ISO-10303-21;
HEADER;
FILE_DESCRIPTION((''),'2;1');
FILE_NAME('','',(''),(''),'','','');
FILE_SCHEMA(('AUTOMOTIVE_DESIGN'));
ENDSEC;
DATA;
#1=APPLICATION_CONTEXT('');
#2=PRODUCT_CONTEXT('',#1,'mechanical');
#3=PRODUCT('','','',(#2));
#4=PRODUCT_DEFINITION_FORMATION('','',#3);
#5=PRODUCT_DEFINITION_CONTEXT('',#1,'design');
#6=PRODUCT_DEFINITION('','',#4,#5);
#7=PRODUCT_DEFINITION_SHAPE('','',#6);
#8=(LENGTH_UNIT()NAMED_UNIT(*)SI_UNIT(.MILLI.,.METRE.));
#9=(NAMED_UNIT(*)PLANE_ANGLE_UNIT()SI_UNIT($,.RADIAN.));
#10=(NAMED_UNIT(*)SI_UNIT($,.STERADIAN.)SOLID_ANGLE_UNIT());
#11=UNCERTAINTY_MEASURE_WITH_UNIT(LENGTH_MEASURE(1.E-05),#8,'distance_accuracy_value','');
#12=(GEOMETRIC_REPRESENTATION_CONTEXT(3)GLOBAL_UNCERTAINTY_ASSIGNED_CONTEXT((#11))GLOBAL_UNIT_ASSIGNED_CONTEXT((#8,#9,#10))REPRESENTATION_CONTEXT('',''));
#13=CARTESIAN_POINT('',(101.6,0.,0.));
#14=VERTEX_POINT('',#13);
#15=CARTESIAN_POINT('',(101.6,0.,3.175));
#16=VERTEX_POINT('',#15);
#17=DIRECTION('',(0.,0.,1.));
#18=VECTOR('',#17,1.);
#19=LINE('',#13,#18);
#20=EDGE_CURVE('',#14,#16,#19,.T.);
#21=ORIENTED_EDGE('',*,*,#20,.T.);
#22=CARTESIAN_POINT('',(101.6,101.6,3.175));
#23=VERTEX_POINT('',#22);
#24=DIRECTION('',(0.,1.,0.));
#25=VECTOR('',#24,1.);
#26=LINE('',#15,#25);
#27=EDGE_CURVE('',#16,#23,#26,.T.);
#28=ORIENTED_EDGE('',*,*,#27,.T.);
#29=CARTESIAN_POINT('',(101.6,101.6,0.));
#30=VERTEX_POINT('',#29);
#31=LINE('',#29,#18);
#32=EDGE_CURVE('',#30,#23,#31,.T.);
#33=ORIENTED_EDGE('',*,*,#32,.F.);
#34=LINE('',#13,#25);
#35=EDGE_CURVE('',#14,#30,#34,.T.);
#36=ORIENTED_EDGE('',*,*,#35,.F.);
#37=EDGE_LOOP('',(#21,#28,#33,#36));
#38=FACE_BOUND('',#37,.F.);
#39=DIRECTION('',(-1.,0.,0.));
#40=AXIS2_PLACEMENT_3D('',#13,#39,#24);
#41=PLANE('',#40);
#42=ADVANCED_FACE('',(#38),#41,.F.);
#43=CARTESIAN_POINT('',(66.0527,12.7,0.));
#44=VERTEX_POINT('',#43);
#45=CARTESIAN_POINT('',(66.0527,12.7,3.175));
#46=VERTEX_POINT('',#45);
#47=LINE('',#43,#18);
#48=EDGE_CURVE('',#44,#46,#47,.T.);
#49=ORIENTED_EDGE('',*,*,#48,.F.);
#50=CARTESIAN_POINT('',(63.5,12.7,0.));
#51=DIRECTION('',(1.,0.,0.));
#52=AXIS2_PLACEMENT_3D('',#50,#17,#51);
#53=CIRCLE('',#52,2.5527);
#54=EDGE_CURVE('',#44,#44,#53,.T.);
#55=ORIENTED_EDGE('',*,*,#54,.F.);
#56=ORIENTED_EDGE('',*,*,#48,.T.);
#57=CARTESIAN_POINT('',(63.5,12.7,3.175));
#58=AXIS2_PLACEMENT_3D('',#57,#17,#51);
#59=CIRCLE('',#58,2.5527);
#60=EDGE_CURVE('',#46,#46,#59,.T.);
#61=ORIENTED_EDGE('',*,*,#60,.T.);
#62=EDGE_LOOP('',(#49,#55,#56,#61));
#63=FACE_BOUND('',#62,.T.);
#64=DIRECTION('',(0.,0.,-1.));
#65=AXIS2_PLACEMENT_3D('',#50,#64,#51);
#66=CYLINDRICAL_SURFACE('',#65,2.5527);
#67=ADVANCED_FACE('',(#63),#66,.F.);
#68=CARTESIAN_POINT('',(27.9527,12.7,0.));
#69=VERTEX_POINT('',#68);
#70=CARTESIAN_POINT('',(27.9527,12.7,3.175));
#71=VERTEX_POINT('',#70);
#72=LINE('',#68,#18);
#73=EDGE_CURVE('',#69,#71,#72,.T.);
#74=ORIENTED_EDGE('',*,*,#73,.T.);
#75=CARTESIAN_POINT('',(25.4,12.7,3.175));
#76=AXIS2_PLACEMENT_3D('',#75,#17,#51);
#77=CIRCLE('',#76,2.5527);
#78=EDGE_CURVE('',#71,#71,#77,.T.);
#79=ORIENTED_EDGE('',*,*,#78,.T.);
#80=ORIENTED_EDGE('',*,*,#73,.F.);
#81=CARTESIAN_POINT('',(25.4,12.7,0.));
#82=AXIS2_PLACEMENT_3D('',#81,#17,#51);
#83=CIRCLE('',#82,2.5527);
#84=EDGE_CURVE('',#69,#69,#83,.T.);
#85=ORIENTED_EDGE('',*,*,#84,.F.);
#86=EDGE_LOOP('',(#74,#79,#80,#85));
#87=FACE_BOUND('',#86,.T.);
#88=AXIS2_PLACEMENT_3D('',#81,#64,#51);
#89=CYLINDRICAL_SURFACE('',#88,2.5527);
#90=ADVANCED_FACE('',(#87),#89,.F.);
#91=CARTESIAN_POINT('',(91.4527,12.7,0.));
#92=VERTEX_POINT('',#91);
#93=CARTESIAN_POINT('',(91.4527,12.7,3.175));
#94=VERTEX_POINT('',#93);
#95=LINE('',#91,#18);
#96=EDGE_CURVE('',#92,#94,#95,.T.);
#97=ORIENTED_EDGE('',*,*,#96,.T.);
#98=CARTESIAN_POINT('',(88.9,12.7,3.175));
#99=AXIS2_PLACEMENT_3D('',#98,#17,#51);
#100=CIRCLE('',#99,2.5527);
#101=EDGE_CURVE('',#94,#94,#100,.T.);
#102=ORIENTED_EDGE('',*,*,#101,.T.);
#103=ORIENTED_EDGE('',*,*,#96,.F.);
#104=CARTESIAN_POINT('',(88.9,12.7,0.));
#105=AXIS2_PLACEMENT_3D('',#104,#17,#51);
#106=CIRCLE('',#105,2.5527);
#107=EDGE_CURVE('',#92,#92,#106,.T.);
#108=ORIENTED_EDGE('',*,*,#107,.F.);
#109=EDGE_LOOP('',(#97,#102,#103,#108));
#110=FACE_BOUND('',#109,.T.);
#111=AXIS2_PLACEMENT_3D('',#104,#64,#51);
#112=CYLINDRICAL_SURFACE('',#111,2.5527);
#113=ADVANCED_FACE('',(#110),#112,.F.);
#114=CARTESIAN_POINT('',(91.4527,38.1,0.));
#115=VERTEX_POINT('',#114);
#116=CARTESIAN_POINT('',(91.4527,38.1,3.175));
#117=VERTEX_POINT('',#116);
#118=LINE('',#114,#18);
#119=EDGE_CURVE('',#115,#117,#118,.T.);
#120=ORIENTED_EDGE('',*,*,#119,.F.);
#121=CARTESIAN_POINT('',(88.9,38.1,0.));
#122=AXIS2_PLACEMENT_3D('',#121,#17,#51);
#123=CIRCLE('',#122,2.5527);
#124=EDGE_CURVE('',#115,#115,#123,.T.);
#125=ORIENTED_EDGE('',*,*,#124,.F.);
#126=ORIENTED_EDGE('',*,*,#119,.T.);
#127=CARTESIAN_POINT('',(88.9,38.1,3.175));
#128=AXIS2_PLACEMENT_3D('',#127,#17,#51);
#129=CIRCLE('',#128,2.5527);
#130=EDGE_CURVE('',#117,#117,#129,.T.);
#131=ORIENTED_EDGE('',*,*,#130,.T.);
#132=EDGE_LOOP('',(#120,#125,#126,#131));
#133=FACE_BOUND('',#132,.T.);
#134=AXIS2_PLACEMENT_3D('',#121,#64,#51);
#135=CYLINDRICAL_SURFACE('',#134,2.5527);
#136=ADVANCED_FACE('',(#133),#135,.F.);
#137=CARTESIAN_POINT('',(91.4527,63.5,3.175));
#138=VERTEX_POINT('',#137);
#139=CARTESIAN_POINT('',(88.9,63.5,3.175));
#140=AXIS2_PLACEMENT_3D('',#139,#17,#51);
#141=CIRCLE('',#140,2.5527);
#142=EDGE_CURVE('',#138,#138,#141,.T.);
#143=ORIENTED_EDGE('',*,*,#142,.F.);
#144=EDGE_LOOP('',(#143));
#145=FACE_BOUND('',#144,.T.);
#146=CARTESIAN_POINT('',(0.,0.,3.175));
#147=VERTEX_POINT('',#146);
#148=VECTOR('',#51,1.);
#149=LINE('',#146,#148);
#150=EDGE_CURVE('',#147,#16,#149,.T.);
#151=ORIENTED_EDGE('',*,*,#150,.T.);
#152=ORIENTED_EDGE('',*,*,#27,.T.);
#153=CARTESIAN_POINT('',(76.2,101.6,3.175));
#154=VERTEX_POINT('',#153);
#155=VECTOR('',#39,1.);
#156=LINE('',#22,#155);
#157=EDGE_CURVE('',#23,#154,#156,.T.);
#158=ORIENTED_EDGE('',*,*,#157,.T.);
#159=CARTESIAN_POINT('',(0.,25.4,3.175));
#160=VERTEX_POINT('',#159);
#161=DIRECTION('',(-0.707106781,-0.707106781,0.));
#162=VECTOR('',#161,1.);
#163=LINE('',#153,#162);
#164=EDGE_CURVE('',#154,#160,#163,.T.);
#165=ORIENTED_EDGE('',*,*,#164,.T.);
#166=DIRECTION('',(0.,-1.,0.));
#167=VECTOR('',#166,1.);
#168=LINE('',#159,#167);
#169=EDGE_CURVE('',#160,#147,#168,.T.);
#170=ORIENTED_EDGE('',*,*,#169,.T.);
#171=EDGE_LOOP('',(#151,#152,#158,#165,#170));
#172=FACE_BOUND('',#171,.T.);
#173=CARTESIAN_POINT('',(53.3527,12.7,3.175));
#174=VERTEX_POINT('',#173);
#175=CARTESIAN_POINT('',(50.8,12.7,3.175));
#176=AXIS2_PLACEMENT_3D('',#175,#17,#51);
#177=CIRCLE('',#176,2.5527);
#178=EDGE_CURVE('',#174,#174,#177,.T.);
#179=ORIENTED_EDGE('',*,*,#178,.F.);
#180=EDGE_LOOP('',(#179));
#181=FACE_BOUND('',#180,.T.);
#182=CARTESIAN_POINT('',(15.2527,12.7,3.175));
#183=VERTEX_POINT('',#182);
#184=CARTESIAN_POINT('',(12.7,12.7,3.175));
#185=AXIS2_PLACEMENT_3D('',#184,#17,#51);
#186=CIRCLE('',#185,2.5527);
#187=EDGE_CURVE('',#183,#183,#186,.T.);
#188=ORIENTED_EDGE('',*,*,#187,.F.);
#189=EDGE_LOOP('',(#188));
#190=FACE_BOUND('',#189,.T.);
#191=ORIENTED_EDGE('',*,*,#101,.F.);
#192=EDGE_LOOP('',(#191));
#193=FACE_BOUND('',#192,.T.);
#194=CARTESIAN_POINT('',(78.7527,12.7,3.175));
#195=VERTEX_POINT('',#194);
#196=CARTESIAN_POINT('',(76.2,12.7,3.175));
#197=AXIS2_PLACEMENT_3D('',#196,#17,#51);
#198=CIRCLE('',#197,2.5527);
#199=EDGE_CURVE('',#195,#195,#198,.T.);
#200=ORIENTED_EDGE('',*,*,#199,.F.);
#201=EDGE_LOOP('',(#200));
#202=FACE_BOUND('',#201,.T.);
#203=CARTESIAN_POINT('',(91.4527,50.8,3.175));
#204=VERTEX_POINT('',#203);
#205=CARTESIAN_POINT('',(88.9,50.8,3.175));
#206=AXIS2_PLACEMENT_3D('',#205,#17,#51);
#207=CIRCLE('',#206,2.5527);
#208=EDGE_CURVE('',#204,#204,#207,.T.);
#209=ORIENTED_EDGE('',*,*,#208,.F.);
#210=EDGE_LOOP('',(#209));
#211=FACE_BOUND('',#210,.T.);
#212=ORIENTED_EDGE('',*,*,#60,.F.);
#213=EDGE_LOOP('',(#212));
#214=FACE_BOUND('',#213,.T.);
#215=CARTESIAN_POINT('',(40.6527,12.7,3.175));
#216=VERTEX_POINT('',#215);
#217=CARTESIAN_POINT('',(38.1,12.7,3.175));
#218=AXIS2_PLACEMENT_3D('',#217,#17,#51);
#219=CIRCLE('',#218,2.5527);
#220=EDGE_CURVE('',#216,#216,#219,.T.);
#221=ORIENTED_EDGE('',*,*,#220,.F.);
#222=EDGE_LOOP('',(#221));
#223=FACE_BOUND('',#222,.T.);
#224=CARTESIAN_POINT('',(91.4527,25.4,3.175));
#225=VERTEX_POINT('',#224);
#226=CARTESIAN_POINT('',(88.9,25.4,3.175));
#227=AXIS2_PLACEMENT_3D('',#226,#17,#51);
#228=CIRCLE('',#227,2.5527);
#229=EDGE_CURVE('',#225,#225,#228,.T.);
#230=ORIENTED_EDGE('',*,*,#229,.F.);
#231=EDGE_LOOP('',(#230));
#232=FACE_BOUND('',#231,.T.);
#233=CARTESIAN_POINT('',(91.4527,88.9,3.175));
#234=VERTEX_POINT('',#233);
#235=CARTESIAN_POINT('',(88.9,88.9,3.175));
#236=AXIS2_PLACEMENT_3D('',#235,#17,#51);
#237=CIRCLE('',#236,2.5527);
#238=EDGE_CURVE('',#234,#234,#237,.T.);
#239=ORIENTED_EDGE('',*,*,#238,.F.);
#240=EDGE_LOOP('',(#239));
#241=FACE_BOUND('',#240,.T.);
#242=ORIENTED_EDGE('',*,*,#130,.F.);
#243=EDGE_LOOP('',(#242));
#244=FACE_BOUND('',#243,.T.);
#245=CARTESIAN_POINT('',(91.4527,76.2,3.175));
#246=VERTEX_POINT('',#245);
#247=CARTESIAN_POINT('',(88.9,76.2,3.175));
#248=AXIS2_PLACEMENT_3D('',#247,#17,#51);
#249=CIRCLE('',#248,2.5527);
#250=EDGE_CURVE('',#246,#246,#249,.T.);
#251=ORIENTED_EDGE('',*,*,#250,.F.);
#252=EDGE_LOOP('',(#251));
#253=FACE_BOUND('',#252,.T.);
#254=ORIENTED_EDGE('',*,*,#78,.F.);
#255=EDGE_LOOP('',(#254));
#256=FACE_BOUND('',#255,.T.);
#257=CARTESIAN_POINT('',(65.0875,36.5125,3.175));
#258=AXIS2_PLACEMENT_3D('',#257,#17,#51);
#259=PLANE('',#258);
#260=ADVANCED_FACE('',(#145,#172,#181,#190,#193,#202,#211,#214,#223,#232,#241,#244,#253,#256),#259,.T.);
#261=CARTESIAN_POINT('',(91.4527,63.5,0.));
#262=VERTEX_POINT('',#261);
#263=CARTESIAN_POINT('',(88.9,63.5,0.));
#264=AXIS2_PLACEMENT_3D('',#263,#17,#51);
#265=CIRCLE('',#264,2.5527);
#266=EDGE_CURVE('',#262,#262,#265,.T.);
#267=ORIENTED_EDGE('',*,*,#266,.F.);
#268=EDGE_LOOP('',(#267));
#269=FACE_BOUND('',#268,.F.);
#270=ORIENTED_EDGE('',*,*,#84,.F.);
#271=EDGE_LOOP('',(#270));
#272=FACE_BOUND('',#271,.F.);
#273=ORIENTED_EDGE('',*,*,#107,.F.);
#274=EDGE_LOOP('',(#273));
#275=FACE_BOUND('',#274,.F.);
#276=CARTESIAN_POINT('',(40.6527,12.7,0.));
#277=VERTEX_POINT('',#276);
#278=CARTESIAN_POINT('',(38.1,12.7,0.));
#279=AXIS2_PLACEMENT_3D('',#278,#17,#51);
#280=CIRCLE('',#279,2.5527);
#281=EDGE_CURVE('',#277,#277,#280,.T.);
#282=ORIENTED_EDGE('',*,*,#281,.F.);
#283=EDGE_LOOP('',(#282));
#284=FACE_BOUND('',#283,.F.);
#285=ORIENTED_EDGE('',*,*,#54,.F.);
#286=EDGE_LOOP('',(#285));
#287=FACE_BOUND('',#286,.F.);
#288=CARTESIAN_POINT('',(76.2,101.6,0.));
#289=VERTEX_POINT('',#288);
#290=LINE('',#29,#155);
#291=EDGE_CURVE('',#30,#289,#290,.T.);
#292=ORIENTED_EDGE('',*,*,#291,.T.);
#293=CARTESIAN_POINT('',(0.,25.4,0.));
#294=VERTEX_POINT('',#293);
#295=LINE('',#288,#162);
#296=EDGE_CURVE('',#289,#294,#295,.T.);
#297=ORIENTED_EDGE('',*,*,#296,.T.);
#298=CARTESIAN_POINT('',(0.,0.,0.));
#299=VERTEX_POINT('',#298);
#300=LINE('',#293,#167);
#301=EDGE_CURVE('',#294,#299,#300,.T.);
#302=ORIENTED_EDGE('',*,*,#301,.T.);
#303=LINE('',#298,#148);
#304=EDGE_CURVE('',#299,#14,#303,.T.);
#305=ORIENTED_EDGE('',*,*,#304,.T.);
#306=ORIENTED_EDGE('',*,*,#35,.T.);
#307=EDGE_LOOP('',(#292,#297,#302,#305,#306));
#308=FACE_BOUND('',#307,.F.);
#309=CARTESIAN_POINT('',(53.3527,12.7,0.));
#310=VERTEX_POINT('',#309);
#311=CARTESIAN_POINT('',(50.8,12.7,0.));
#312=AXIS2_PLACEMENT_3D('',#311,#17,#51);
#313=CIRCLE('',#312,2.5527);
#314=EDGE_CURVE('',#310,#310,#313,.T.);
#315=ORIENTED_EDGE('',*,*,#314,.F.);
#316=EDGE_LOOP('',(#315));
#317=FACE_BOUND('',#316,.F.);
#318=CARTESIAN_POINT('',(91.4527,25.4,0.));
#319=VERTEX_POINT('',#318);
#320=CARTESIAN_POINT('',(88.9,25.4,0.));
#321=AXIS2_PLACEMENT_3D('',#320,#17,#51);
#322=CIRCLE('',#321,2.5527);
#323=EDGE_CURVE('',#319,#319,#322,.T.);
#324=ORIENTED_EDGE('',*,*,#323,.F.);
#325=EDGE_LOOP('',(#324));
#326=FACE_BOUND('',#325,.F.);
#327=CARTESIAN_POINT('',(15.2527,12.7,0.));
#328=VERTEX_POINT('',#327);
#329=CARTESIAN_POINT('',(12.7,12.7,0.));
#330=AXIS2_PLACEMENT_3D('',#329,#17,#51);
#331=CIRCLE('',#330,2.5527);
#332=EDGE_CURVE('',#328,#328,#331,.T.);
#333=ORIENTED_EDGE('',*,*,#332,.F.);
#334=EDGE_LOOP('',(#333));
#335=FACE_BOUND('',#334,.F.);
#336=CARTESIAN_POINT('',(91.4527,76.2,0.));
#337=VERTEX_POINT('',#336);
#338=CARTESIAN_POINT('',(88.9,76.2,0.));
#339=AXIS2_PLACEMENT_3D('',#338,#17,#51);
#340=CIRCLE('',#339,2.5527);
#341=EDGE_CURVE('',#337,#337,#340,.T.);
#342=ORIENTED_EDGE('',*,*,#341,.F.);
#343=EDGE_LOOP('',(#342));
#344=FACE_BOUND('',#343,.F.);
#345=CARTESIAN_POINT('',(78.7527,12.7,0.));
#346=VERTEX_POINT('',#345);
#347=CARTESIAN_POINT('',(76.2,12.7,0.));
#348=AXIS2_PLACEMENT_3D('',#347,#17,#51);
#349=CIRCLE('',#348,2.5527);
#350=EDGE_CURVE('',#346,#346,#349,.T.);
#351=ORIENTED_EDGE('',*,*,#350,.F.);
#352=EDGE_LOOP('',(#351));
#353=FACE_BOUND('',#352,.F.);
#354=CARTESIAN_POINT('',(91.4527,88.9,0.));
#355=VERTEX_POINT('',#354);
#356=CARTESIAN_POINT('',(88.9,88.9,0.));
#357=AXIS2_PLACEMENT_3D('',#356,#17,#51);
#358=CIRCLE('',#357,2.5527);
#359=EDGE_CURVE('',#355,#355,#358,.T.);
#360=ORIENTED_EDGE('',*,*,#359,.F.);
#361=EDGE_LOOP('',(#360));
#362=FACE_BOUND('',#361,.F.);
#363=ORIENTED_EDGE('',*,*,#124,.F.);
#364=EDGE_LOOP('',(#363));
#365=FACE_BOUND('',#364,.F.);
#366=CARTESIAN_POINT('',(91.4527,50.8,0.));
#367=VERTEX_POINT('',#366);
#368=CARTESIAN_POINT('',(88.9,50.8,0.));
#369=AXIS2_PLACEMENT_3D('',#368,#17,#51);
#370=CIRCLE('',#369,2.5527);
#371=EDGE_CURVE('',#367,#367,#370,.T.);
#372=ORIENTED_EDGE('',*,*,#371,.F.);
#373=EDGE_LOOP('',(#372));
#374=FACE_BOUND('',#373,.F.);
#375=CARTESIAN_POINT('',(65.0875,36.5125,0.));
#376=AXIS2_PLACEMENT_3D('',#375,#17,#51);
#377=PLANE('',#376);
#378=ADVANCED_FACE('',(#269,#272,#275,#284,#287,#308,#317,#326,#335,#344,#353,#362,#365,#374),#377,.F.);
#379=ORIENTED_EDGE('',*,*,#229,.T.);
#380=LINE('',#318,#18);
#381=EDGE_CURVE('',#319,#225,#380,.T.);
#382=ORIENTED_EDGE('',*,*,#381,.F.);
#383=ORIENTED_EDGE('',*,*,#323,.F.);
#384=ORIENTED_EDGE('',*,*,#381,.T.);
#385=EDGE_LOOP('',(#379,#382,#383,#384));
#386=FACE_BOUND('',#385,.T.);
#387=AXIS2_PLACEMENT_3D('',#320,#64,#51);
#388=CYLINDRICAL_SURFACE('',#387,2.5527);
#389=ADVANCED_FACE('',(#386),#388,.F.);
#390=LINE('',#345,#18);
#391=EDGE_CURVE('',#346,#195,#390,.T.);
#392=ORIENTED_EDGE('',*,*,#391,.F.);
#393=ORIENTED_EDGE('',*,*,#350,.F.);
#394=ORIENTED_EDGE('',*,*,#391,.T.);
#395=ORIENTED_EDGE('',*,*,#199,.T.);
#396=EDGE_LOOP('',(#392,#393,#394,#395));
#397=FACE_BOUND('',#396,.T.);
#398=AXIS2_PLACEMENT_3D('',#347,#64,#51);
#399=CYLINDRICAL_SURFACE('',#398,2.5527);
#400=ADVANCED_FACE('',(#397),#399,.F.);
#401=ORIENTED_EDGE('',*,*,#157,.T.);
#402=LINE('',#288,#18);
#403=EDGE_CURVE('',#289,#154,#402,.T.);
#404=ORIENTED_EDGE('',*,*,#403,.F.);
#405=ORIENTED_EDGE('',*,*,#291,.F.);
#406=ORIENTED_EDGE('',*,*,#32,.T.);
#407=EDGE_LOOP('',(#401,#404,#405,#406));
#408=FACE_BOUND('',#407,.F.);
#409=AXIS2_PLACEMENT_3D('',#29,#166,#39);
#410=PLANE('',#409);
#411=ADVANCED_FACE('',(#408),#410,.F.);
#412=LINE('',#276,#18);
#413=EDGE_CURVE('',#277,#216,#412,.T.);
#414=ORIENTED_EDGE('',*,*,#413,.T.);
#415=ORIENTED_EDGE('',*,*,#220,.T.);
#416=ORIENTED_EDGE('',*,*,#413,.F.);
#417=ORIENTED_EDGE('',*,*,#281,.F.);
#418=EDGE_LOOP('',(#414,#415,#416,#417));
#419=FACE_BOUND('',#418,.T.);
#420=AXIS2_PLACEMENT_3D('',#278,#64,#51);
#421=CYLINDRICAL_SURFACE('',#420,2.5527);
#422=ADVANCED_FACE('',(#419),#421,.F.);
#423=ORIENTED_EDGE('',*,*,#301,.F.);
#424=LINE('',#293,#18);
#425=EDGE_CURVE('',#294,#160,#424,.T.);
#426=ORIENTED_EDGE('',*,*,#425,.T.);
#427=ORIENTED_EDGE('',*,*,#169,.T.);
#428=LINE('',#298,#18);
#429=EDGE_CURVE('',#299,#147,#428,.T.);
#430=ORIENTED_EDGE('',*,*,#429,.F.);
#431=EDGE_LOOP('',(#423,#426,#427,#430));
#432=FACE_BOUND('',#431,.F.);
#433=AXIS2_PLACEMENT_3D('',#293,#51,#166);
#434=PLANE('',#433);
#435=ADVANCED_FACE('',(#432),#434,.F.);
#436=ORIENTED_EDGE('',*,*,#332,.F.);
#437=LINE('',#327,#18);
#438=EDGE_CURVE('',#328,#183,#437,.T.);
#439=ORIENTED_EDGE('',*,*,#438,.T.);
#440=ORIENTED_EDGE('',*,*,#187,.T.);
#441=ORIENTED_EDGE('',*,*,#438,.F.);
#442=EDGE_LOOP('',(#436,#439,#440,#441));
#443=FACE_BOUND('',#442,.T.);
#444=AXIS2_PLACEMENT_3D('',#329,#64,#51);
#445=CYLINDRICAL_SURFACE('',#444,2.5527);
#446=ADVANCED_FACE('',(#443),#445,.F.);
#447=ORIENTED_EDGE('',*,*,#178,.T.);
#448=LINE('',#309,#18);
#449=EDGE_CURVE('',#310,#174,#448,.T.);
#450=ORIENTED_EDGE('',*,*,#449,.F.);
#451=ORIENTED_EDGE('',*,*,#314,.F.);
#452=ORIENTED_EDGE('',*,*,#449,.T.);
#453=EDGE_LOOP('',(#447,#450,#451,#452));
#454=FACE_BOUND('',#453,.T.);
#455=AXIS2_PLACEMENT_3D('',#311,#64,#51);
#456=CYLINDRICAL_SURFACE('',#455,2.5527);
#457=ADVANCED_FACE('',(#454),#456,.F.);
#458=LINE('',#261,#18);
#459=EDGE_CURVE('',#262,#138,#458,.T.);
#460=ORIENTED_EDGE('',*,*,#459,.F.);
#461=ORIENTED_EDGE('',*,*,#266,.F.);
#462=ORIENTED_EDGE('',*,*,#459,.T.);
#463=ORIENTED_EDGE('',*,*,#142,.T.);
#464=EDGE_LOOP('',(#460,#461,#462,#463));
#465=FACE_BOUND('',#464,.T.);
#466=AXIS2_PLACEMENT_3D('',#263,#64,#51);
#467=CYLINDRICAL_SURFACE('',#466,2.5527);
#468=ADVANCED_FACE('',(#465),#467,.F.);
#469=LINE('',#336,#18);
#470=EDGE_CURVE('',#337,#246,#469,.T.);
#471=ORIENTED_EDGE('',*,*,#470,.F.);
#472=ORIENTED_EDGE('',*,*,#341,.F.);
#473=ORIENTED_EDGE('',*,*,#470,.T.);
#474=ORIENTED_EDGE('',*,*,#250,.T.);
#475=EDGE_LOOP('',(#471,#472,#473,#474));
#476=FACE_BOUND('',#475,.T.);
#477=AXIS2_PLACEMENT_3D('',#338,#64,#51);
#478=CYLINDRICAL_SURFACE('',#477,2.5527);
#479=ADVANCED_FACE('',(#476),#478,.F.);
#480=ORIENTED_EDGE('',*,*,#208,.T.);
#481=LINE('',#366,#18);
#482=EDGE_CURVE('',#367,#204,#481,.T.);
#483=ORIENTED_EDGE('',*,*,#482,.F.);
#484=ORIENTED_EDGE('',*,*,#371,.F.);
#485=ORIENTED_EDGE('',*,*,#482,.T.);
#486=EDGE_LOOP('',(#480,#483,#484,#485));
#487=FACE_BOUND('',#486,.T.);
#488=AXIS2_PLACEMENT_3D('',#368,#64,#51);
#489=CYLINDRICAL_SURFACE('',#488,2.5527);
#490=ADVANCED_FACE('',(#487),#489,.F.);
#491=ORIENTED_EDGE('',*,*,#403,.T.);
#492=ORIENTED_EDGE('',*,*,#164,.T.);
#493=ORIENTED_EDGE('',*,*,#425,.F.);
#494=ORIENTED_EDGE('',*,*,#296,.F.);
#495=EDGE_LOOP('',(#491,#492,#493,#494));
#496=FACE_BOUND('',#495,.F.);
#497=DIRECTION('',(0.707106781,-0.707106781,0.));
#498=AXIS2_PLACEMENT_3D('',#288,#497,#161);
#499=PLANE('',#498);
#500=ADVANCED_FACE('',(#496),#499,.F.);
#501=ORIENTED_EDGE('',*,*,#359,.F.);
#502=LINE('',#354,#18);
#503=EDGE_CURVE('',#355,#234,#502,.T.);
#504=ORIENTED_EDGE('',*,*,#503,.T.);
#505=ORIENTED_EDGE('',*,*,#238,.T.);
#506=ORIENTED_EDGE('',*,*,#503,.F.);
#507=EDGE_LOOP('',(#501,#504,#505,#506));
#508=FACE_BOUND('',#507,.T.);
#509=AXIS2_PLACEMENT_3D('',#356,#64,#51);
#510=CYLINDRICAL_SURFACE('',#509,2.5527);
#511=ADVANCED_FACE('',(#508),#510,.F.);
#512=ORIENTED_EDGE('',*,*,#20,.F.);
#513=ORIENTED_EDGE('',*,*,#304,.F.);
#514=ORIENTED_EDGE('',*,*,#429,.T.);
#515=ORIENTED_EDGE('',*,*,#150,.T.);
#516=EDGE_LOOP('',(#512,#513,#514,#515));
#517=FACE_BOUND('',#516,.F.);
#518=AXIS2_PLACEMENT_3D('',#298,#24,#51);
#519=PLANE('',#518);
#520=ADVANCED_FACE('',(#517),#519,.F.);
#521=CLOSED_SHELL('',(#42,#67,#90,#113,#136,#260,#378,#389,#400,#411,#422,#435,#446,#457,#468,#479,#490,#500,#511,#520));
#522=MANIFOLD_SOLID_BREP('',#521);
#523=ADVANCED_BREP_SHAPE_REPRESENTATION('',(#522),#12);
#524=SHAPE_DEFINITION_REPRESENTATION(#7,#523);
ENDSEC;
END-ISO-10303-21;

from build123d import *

# Parameters (mm, degrees)
F0_R     = 2.5527
F1_DEPTH = 3.175


# Not quite as in the source:
# - a length typed as a fraction of an inch, garbled in the dataset ("3 / 203.2 mm" for 3/8 in), is restored


with BuildPart() as f1:
    # F0 (on Top) → F1 (new body)
    with BuildSketch(Plane.XY):
        Polygon((0, 25.4), (0, 0), (101.6, 0), (101.6, 101.6), (76.2, 101.6), (76.2, 25.4), align=None)
        with Locations((12.7, 12.7)):
            Circle(F0_R, mode=Mode.SUBTRACT)
        with Locations((25.4, 12.7)):
            Circle(F0_R, mode=Mode.SUBTRACT)
        with Locations((38.1, 12.7)):
            Circle(F0_R, mode=Mode.SUBTRACT)
        with Locations((50.8, 12.7)):
            Circle(F0_R, mode=Mode.SUBTRACT)
        with Locations((63.5, 12.7)):
            Circle(F0_R, mode=Mode.SUBTRACT)
        with Locations((76.2, 12.7)):
            Circle(F0_R, mode=Mode.SUBTRACT)
        with Locations((88.9, 12.7)):
            Circle(F0_R, mode=Mode.SUBTRACT)
        with Locations((88.9, 25.4)):
            Circle(F0_R, mode=Mode.SUBTRACT)
        with Locations((88.9, 38.1)):
            Circle(F0_R, mode=Mode.SUBTRACT)
        with Locations((88.9, 50.8)):
            Circle(F0_R, mode=Mode.SUBTRACT)
        with Locations((88.9, 63.5)):
            Circle(F0_R, mode=Mode.SUBTRACT)
        with Locations((88.9, 76.2)):
            Circle(F0_R, mode=Mode.SUBTRACT)
        with Locations((88.9, 88.9)):
            Circle(F0_R, mode=Mode.SUBTRACT)
        Polygon((76.2, 101.6), (0, 25.4), (76.2, 25.4), align=None)
    extrude(amount=F1_DEPTH)


solid = f1.part
